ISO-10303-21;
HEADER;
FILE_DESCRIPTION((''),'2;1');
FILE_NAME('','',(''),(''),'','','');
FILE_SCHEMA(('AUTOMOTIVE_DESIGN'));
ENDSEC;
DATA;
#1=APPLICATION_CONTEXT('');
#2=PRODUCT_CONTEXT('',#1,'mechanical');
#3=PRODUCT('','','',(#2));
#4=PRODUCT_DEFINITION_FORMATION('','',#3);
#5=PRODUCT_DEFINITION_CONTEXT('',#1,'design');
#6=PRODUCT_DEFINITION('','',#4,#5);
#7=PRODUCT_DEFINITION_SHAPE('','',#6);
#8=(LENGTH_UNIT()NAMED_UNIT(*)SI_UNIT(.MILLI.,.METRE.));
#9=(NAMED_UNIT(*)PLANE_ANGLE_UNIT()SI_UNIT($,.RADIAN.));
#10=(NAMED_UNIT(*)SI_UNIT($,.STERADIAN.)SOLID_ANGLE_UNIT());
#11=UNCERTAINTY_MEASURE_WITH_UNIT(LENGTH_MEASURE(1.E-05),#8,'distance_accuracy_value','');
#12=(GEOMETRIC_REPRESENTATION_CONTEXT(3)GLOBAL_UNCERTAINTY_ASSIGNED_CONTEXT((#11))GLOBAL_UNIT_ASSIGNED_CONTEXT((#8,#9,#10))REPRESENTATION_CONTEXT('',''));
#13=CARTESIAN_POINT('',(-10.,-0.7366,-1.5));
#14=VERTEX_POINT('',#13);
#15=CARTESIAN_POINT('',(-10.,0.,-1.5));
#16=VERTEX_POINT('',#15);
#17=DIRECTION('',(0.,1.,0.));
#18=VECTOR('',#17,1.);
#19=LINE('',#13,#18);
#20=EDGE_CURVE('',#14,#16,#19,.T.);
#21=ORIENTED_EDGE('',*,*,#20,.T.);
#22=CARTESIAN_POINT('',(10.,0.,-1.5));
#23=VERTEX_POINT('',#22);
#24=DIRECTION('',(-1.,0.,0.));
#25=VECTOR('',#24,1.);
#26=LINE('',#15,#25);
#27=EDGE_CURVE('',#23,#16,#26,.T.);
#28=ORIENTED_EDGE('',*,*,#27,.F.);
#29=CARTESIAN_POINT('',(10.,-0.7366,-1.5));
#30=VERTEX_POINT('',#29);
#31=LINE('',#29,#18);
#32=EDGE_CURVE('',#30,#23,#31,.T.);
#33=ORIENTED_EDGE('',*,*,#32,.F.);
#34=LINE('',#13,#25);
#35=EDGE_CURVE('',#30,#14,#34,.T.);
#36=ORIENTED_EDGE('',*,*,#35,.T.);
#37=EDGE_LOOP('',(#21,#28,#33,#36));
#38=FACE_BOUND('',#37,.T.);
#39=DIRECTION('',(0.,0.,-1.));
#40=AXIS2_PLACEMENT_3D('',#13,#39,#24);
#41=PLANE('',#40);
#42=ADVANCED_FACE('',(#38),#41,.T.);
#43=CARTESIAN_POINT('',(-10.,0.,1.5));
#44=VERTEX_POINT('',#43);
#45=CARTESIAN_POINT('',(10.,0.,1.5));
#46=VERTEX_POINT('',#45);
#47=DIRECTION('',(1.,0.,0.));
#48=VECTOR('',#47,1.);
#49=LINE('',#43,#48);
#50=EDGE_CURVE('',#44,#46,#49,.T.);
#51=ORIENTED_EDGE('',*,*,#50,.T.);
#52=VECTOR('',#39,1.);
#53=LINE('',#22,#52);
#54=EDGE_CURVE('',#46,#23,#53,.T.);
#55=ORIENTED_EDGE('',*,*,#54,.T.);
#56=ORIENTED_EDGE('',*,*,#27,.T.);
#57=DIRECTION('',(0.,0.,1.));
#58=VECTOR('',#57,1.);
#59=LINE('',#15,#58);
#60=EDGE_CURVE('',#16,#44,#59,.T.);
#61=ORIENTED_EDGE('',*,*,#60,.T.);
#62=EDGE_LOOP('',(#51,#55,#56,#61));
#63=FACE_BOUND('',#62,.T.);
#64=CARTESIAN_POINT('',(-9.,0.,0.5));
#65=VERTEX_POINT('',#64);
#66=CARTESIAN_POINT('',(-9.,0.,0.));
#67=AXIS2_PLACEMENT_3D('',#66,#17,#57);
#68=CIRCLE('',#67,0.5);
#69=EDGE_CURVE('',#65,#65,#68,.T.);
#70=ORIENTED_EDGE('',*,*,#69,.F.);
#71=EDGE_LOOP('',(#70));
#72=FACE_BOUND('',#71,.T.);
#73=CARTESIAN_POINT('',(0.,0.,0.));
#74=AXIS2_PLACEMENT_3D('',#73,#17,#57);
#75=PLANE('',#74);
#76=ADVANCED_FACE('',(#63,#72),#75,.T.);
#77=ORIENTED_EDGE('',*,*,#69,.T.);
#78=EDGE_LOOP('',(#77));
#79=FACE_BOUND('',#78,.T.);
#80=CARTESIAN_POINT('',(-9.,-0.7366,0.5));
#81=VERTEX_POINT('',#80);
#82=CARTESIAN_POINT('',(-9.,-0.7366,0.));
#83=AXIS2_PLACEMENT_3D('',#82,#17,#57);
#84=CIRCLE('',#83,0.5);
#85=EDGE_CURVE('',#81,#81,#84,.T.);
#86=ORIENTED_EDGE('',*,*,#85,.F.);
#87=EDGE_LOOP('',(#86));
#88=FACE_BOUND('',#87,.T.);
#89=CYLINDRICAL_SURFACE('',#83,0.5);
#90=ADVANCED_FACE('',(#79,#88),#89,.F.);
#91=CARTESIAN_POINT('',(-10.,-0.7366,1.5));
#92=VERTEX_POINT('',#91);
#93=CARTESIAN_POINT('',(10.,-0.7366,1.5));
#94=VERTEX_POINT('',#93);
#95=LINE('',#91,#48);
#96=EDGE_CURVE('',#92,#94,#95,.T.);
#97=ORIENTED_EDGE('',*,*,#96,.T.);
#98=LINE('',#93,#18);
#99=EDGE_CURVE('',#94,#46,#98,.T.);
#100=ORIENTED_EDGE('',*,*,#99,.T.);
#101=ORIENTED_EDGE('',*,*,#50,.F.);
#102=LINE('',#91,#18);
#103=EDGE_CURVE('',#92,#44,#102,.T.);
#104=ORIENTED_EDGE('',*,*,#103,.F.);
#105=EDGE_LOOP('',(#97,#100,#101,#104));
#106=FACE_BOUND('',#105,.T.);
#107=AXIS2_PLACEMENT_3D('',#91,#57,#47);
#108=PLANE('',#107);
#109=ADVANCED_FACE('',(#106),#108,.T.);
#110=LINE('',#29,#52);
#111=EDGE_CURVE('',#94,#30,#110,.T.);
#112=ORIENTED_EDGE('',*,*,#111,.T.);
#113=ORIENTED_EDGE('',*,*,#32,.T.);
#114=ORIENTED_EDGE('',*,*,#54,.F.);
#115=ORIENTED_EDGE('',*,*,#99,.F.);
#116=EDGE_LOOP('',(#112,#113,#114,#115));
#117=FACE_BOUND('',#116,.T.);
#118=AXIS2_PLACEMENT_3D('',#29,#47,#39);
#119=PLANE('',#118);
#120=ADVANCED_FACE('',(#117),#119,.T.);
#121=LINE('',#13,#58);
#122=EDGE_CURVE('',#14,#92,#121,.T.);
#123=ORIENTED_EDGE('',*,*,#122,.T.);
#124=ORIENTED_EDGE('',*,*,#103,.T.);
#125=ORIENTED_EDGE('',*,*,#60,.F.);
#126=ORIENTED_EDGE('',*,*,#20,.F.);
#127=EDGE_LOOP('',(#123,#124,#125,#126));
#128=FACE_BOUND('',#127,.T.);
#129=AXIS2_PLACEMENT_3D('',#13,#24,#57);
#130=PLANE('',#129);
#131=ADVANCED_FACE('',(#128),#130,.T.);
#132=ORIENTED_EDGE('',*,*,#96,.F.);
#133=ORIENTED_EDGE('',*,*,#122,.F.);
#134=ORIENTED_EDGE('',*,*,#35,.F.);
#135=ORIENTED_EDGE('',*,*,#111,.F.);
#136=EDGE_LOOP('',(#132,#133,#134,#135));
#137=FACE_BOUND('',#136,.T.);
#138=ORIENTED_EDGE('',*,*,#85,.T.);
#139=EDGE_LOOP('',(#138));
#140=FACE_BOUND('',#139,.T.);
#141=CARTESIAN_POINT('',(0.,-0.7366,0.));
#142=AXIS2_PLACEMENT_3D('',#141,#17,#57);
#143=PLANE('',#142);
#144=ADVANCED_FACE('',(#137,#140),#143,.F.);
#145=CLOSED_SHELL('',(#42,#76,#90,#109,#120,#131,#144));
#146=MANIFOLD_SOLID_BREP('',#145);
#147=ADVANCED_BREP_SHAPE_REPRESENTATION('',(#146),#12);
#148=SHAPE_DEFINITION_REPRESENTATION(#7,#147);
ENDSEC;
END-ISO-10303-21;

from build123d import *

# Parameters (mm, degrees)
SKETCH1_W          = 20
SKETCH1_H          = 3
SKETCH1_R          = 0.5
BASE_FLANGE1_DEPTH = 0.7366


# Sheet-metal steps are written as plain solids
with BuildPart() as part:
    # Sketch1 → Base-Flange1 (new body)
    with BuildSketch(Plane(origin=(0, 0, 0), x_dir=(1, 0, 0), z_dir=(0, 1, 0))):
        Rectangle(SKETCH1_W, SKETCH1_H)
        with Locations(Location((-9, 0, 0), (0, 0, 270))):
            Circle(SKETCH1_R, mode=Mode.SUBTRACT)
    extrude(amount=-BASE_FLANGE1_DEPTH)


solid = part.part
